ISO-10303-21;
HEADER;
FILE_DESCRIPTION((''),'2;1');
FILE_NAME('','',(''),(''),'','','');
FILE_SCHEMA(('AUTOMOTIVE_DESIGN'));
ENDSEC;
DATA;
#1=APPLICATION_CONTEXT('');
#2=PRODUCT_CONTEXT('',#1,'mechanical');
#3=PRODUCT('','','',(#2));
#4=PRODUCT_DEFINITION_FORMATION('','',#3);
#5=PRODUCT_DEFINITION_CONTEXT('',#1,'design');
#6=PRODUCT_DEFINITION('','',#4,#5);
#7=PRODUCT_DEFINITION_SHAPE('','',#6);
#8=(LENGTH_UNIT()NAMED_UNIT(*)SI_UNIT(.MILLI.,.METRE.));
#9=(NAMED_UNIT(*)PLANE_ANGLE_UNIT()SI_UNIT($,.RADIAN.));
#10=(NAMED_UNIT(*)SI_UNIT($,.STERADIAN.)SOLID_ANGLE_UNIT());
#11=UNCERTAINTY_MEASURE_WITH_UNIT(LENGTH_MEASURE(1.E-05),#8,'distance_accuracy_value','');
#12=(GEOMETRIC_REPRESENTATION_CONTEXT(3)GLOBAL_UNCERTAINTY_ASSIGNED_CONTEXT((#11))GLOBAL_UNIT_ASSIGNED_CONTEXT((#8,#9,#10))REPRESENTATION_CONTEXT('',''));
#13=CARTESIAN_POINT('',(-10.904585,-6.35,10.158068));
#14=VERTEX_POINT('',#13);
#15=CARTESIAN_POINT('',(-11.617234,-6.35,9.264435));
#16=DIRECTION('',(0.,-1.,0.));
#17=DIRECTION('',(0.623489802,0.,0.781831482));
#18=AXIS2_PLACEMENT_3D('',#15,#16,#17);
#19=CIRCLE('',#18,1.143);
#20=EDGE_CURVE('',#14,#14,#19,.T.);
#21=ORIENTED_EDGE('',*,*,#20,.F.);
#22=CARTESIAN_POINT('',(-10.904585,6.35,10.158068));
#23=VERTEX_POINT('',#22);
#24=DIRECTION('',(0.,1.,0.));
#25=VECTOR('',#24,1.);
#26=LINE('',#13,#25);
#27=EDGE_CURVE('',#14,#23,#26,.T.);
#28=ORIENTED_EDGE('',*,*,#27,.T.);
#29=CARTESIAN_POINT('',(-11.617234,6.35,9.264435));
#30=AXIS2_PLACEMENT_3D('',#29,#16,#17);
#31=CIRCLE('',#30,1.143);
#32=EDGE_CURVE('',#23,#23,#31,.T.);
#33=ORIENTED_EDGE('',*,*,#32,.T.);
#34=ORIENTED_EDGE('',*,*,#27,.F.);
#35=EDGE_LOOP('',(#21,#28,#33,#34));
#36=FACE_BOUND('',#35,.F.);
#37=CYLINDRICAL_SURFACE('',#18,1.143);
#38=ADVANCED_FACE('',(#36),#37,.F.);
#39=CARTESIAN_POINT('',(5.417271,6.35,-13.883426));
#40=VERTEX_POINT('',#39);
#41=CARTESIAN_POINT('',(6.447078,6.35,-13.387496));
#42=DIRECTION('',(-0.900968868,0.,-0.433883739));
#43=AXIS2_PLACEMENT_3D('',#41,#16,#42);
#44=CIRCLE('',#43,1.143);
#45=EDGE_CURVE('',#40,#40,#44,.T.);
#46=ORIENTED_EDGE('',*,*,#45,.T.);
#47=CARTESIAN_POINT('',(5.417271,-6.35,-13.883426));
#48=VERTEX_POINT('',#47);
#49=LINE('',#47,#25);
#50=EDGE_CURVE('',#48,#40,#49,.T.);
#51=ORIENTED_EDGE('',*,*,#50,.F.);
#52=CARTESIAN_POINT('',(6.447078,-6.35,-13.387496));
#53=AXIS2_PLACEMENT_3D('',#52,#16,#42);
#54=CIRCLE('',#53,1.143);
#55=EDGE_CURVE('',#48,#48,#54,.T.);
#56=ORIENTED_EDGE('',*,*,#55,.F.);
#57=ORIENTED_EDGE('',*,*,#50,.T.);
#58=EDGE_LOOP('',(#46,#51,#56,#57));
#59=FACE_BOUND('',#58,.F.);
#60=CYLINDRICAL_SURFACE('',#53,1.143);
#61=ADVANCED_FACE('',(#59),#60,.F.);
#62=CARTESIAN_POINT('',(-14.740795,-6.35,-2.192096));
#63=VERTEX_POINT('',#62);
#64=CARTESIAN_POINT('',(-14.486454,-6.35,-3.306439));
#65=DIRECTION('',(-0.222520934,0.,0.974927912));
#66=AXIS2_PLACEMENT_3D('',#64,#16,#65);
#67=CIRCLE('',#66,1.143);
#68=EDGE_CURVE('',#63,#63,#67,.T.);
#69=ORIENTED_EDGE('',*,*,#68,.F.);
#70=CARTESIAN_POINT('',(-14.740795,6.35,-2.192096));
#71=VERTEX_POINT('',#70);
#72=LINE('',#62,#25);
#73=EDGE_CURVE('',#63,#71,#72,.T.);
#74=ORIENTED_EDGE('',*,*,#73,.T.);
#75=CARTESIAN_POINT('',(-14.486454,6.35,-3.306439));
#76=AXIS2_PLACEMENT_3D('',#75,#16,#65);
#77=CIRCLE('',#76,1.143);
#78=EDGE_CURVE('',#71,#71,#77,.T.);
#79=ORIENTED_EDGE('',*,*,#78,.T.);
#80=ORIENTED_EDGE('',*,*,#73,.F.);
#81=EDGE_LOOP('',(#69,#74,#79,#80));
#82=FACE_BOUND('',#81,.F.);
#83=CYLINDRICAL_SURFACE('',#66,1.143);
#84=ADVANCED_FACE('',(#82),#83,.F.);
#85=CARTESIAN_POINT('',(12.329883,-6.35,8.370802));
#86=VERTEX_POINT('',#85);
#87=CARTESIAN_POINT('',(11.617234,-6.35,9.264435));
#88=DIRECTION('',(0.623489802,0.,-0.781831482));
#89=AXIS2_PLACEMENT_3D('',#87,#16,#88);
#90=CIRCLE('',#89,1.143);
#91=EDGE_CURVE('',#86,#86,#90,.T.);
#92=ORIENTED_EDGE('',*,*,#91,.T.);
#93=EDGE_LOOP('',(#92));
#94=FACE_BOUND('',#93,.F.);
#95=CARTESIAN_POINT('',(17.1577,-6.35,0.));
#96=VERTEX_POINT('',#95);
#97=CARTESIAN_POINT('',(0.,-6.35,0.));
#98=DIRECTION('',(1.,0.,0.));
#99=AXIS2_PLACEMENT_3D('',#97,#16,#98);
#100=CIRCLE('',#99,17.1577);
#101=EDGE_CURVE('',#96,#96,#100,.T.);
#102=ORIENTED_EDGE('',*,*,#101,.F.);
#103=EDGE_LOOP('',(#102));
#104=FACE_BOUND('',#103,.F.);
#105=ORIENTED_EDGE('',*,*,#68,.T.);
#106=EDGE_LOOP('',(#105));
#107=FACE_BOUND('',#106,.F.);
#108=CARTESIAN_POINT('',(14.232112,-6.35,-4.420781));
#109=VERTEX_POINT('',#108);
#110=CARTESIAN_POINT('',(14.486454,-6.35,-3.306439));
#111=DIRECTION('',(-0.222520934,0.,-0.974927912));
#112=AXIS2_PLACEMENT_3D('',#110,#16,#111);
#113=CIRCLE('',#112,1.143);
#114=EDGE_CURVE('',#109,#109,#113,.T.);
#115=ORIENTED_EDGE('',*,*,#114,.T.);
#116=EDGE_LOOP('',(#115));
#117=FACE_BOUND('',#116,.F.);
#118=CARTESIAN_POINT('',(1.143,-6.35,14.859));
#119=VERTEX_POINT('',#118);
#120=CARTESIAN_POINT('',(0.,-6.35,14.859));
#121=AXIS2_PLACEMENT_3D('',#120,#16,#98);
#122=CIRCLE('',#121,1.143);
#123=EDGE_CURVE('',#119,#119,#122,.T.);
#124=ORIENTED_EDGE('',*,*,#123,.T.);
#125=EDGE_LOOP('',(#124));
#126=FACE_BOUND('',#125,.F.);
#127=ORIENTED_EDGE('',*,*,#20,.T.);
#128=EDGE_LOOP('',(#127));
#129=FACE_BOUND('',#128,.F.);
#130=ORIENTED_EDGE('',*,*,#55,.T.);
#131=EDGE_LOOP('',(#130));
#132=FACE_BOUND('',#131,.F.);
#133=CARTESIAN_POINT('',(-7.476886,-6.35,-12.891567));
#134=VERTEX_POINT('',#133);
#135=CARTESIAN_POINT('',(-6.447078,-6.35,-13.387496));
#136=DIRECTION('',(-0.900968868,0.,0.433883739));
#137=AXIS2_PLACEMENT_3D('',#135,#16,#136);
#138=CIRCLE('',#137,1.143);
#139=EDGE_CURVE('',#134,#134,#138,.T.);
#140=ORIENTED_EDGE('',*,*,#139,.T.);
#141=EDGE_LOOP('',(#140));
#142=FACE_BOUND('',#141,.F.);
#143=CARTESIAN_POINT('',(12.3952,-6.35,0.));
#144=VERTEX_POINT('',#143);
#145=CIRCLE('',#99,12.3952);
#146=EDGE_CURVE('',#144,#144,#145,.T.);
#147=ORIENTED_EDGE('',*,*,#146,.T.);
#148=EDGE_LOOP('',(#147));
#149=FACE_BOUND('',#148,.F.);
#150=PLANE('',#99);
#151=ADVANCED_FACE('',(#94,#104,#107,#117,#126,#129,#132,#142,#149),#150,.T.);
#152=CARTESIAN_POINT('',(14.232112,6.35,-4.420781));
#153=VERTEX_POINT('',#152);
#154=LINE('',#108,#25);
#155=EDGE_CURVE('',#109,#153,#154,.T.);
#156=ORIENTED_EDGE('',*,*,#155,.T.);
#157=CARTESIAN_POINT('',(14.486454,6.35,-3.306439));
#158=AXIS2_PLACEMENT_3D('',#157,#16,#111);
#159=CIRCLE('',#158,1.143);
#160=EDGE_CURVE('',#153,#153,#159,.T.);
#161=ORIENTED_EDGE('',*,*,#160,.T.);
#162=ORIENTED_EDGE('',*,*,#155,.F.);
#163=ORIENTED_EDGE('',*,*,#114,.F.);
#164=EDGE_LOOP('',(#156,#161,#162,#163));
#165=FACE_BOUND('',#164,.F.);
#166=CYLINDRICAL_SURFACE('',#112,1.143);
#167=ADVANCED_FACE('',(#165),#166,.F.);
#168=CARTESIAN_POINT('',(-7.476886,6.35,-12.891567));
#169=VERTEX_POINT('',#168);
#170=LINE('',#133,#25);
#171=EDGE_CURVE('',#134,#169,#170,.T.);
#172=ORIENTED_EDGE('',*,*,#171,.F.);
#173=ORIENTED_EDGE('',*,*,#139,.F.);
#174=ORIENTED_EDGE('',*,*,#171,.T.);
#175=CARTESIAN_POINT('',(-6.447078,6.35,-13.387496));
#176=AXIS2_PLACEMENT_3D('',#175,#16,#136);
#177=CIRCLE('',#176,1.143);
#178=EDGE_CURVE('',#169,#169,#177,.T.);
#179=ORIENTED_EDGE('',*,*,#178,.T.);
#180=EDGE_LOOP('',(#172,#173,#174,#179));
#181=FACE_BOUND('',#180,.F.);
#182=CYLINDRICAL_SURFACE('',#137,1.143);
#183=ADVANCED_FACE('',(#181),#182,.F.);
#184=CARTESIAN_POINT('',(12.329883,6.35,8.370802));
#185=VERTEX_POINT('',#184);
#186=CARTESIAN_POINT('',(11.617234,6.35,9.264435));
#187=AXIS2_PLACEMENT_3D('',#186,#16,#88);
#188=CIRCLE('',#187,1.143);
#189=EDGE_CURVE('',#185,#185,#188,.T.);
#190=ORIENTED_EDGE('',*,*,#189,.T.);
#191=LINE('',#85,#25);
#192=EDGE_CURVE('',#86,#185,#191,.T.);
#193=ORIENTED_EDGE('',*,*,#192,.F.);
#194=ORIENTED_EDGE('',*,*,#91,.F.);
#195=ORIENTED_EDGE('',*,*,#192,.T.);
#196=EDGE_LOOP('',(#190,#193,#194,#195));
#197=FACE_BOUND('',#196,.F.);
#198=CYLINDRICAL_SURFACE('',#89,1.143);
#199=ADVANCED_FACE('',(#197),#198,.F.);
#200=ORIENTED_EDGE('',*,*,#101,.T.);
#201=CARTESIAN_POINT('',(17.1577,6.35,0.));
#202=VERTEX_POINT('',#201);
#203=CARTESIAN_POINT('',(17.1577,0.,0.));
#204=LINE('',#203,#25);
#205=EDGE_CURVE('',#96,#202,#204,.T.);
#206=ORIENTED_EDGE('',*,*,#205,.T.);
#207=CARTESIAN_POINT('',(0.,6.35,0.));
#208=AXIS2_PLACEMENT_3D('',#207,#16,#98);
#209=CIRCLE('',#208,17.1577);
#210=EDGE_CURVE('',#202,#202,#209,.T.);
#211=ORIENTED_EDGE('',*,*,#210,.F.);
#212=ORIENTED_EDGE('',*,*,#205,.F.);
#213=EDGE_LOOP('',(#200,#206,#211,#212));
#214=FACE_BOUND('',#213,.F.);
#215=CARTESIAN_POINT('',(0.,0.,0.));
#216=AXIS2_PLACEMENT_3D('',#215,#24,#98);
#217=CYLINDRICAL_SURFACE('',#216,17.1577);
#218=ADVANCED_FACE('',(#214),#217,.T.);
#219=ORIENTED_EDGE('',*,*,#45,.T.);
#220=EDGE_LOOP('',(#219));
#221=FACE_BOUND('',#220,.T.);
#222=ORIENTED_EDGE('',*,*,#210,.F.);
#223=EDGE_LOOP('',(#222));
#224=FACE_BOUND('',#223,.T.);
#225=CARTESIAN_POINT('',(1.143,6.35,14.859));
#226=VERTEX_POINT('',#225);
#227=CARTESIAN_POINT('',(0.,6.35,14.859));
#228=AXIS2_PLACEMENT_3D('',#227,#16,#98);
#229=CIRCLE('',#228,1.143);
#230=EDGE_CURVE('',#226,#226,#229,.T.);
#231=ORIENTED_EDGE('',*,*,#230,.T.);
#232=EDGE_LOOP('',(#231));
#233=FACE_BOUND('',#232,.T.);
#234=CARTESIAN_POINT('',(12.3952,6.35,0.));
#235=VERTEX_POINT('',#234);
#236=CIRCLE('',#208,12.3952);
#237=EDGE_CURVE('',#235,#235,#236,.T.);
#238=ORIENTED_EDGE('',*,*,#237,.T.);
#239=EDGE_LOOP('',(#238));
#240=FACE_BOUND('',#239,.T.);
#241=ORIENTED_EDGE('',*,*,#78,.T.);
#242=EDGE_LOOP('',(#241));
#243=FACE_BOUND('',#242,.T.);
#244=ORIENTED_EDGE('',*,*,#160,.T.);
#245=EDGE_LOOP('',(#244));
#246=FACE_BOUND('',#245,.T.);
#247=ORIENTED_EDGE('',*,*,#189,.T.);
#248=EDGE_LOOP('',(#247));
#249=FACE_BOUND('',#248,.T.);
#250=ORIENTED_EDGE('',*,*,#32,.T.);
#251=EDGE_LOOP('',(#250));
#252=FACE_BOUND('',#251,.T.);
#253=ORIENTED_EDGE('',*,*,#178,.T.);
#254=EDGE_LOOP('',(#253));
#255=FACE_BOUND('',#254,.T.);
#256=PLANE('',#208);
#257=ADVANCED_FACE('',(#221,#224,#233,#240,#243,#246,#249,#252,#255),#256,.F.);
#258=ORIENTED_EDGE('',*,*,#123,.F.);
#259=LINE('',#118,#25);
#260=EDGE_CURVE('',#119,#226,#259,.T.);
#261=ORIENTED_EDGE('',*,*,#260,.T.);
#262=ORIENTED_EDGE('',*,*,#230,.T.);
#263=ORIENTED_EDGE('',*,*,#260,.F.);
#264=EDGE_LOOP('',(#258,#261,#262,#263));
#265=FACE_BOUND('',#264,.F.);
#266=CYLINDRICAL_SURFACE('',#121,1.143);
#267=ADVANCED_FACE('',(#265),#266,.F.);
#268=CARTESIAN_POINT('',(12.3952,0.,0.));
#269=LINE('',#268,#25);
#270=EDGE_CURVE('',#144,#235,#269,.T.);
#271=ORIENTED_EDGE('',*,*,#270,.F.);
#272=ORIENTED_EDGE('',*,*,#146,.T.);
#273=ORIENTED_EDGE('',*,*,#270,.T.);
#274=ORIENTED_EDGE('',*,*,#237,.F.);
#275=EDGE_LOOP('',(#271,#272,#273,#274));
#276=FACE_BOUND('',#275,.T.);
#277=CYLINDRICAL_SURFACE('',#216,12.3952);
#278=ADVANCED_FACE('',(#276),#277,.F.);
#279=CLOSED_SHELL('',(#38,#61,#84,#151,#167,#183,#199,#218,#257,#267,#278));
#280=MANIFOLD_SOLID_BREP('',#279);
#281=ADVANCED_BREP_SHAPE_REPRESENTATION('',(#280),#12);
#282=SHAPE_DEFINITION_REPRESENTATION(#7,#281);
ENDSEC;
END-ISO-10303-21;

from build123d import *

# Parameters (mm, degrees)
F0_W            = 4.7625
F0_H            = 12.7
F3_R            = 1.143
F4_DEPTH        = 12.7
F4_COPIES_COUNT = 7


# Not quite as in the source:
# - a pattern or mirror of a feature is missing from the dataset's text; its kind, count and spacing are read off the source's solid


with BuildPart() as f1:
    # F0 (on Top) → F1 (revolve)
    with BuildSketch(Plane.XY):
        with Locations((14.77645, 0)):
            Rectangle(F0_W, F0_H)
    revolve(axis=Axis((0, -1.5469156838, 0), (0, -1, 0)))

    # F3 (on face) → F4 (cut, through all)
    with BuildSketch(Plane.XZ.offset(6.35)):
        with Locations((0, 14.859)):
            Circle(F3_R)
    f4 = extrude(amount=-F4_DEPTH, mode=Mode.SUBTRACT)

    # F4_copies: F4 ×7 about axis
    f4_copies_axis = Axis((0, 0, 0), (0, 1, 0))
    for i in range(1, F4_COPIES_COUNT):
        add(f4.rotate(f4_copies_axis, i * 360 / F4_COPIES_COUNT), mode=Mode.SUBTRACT)


solid = f1.part
